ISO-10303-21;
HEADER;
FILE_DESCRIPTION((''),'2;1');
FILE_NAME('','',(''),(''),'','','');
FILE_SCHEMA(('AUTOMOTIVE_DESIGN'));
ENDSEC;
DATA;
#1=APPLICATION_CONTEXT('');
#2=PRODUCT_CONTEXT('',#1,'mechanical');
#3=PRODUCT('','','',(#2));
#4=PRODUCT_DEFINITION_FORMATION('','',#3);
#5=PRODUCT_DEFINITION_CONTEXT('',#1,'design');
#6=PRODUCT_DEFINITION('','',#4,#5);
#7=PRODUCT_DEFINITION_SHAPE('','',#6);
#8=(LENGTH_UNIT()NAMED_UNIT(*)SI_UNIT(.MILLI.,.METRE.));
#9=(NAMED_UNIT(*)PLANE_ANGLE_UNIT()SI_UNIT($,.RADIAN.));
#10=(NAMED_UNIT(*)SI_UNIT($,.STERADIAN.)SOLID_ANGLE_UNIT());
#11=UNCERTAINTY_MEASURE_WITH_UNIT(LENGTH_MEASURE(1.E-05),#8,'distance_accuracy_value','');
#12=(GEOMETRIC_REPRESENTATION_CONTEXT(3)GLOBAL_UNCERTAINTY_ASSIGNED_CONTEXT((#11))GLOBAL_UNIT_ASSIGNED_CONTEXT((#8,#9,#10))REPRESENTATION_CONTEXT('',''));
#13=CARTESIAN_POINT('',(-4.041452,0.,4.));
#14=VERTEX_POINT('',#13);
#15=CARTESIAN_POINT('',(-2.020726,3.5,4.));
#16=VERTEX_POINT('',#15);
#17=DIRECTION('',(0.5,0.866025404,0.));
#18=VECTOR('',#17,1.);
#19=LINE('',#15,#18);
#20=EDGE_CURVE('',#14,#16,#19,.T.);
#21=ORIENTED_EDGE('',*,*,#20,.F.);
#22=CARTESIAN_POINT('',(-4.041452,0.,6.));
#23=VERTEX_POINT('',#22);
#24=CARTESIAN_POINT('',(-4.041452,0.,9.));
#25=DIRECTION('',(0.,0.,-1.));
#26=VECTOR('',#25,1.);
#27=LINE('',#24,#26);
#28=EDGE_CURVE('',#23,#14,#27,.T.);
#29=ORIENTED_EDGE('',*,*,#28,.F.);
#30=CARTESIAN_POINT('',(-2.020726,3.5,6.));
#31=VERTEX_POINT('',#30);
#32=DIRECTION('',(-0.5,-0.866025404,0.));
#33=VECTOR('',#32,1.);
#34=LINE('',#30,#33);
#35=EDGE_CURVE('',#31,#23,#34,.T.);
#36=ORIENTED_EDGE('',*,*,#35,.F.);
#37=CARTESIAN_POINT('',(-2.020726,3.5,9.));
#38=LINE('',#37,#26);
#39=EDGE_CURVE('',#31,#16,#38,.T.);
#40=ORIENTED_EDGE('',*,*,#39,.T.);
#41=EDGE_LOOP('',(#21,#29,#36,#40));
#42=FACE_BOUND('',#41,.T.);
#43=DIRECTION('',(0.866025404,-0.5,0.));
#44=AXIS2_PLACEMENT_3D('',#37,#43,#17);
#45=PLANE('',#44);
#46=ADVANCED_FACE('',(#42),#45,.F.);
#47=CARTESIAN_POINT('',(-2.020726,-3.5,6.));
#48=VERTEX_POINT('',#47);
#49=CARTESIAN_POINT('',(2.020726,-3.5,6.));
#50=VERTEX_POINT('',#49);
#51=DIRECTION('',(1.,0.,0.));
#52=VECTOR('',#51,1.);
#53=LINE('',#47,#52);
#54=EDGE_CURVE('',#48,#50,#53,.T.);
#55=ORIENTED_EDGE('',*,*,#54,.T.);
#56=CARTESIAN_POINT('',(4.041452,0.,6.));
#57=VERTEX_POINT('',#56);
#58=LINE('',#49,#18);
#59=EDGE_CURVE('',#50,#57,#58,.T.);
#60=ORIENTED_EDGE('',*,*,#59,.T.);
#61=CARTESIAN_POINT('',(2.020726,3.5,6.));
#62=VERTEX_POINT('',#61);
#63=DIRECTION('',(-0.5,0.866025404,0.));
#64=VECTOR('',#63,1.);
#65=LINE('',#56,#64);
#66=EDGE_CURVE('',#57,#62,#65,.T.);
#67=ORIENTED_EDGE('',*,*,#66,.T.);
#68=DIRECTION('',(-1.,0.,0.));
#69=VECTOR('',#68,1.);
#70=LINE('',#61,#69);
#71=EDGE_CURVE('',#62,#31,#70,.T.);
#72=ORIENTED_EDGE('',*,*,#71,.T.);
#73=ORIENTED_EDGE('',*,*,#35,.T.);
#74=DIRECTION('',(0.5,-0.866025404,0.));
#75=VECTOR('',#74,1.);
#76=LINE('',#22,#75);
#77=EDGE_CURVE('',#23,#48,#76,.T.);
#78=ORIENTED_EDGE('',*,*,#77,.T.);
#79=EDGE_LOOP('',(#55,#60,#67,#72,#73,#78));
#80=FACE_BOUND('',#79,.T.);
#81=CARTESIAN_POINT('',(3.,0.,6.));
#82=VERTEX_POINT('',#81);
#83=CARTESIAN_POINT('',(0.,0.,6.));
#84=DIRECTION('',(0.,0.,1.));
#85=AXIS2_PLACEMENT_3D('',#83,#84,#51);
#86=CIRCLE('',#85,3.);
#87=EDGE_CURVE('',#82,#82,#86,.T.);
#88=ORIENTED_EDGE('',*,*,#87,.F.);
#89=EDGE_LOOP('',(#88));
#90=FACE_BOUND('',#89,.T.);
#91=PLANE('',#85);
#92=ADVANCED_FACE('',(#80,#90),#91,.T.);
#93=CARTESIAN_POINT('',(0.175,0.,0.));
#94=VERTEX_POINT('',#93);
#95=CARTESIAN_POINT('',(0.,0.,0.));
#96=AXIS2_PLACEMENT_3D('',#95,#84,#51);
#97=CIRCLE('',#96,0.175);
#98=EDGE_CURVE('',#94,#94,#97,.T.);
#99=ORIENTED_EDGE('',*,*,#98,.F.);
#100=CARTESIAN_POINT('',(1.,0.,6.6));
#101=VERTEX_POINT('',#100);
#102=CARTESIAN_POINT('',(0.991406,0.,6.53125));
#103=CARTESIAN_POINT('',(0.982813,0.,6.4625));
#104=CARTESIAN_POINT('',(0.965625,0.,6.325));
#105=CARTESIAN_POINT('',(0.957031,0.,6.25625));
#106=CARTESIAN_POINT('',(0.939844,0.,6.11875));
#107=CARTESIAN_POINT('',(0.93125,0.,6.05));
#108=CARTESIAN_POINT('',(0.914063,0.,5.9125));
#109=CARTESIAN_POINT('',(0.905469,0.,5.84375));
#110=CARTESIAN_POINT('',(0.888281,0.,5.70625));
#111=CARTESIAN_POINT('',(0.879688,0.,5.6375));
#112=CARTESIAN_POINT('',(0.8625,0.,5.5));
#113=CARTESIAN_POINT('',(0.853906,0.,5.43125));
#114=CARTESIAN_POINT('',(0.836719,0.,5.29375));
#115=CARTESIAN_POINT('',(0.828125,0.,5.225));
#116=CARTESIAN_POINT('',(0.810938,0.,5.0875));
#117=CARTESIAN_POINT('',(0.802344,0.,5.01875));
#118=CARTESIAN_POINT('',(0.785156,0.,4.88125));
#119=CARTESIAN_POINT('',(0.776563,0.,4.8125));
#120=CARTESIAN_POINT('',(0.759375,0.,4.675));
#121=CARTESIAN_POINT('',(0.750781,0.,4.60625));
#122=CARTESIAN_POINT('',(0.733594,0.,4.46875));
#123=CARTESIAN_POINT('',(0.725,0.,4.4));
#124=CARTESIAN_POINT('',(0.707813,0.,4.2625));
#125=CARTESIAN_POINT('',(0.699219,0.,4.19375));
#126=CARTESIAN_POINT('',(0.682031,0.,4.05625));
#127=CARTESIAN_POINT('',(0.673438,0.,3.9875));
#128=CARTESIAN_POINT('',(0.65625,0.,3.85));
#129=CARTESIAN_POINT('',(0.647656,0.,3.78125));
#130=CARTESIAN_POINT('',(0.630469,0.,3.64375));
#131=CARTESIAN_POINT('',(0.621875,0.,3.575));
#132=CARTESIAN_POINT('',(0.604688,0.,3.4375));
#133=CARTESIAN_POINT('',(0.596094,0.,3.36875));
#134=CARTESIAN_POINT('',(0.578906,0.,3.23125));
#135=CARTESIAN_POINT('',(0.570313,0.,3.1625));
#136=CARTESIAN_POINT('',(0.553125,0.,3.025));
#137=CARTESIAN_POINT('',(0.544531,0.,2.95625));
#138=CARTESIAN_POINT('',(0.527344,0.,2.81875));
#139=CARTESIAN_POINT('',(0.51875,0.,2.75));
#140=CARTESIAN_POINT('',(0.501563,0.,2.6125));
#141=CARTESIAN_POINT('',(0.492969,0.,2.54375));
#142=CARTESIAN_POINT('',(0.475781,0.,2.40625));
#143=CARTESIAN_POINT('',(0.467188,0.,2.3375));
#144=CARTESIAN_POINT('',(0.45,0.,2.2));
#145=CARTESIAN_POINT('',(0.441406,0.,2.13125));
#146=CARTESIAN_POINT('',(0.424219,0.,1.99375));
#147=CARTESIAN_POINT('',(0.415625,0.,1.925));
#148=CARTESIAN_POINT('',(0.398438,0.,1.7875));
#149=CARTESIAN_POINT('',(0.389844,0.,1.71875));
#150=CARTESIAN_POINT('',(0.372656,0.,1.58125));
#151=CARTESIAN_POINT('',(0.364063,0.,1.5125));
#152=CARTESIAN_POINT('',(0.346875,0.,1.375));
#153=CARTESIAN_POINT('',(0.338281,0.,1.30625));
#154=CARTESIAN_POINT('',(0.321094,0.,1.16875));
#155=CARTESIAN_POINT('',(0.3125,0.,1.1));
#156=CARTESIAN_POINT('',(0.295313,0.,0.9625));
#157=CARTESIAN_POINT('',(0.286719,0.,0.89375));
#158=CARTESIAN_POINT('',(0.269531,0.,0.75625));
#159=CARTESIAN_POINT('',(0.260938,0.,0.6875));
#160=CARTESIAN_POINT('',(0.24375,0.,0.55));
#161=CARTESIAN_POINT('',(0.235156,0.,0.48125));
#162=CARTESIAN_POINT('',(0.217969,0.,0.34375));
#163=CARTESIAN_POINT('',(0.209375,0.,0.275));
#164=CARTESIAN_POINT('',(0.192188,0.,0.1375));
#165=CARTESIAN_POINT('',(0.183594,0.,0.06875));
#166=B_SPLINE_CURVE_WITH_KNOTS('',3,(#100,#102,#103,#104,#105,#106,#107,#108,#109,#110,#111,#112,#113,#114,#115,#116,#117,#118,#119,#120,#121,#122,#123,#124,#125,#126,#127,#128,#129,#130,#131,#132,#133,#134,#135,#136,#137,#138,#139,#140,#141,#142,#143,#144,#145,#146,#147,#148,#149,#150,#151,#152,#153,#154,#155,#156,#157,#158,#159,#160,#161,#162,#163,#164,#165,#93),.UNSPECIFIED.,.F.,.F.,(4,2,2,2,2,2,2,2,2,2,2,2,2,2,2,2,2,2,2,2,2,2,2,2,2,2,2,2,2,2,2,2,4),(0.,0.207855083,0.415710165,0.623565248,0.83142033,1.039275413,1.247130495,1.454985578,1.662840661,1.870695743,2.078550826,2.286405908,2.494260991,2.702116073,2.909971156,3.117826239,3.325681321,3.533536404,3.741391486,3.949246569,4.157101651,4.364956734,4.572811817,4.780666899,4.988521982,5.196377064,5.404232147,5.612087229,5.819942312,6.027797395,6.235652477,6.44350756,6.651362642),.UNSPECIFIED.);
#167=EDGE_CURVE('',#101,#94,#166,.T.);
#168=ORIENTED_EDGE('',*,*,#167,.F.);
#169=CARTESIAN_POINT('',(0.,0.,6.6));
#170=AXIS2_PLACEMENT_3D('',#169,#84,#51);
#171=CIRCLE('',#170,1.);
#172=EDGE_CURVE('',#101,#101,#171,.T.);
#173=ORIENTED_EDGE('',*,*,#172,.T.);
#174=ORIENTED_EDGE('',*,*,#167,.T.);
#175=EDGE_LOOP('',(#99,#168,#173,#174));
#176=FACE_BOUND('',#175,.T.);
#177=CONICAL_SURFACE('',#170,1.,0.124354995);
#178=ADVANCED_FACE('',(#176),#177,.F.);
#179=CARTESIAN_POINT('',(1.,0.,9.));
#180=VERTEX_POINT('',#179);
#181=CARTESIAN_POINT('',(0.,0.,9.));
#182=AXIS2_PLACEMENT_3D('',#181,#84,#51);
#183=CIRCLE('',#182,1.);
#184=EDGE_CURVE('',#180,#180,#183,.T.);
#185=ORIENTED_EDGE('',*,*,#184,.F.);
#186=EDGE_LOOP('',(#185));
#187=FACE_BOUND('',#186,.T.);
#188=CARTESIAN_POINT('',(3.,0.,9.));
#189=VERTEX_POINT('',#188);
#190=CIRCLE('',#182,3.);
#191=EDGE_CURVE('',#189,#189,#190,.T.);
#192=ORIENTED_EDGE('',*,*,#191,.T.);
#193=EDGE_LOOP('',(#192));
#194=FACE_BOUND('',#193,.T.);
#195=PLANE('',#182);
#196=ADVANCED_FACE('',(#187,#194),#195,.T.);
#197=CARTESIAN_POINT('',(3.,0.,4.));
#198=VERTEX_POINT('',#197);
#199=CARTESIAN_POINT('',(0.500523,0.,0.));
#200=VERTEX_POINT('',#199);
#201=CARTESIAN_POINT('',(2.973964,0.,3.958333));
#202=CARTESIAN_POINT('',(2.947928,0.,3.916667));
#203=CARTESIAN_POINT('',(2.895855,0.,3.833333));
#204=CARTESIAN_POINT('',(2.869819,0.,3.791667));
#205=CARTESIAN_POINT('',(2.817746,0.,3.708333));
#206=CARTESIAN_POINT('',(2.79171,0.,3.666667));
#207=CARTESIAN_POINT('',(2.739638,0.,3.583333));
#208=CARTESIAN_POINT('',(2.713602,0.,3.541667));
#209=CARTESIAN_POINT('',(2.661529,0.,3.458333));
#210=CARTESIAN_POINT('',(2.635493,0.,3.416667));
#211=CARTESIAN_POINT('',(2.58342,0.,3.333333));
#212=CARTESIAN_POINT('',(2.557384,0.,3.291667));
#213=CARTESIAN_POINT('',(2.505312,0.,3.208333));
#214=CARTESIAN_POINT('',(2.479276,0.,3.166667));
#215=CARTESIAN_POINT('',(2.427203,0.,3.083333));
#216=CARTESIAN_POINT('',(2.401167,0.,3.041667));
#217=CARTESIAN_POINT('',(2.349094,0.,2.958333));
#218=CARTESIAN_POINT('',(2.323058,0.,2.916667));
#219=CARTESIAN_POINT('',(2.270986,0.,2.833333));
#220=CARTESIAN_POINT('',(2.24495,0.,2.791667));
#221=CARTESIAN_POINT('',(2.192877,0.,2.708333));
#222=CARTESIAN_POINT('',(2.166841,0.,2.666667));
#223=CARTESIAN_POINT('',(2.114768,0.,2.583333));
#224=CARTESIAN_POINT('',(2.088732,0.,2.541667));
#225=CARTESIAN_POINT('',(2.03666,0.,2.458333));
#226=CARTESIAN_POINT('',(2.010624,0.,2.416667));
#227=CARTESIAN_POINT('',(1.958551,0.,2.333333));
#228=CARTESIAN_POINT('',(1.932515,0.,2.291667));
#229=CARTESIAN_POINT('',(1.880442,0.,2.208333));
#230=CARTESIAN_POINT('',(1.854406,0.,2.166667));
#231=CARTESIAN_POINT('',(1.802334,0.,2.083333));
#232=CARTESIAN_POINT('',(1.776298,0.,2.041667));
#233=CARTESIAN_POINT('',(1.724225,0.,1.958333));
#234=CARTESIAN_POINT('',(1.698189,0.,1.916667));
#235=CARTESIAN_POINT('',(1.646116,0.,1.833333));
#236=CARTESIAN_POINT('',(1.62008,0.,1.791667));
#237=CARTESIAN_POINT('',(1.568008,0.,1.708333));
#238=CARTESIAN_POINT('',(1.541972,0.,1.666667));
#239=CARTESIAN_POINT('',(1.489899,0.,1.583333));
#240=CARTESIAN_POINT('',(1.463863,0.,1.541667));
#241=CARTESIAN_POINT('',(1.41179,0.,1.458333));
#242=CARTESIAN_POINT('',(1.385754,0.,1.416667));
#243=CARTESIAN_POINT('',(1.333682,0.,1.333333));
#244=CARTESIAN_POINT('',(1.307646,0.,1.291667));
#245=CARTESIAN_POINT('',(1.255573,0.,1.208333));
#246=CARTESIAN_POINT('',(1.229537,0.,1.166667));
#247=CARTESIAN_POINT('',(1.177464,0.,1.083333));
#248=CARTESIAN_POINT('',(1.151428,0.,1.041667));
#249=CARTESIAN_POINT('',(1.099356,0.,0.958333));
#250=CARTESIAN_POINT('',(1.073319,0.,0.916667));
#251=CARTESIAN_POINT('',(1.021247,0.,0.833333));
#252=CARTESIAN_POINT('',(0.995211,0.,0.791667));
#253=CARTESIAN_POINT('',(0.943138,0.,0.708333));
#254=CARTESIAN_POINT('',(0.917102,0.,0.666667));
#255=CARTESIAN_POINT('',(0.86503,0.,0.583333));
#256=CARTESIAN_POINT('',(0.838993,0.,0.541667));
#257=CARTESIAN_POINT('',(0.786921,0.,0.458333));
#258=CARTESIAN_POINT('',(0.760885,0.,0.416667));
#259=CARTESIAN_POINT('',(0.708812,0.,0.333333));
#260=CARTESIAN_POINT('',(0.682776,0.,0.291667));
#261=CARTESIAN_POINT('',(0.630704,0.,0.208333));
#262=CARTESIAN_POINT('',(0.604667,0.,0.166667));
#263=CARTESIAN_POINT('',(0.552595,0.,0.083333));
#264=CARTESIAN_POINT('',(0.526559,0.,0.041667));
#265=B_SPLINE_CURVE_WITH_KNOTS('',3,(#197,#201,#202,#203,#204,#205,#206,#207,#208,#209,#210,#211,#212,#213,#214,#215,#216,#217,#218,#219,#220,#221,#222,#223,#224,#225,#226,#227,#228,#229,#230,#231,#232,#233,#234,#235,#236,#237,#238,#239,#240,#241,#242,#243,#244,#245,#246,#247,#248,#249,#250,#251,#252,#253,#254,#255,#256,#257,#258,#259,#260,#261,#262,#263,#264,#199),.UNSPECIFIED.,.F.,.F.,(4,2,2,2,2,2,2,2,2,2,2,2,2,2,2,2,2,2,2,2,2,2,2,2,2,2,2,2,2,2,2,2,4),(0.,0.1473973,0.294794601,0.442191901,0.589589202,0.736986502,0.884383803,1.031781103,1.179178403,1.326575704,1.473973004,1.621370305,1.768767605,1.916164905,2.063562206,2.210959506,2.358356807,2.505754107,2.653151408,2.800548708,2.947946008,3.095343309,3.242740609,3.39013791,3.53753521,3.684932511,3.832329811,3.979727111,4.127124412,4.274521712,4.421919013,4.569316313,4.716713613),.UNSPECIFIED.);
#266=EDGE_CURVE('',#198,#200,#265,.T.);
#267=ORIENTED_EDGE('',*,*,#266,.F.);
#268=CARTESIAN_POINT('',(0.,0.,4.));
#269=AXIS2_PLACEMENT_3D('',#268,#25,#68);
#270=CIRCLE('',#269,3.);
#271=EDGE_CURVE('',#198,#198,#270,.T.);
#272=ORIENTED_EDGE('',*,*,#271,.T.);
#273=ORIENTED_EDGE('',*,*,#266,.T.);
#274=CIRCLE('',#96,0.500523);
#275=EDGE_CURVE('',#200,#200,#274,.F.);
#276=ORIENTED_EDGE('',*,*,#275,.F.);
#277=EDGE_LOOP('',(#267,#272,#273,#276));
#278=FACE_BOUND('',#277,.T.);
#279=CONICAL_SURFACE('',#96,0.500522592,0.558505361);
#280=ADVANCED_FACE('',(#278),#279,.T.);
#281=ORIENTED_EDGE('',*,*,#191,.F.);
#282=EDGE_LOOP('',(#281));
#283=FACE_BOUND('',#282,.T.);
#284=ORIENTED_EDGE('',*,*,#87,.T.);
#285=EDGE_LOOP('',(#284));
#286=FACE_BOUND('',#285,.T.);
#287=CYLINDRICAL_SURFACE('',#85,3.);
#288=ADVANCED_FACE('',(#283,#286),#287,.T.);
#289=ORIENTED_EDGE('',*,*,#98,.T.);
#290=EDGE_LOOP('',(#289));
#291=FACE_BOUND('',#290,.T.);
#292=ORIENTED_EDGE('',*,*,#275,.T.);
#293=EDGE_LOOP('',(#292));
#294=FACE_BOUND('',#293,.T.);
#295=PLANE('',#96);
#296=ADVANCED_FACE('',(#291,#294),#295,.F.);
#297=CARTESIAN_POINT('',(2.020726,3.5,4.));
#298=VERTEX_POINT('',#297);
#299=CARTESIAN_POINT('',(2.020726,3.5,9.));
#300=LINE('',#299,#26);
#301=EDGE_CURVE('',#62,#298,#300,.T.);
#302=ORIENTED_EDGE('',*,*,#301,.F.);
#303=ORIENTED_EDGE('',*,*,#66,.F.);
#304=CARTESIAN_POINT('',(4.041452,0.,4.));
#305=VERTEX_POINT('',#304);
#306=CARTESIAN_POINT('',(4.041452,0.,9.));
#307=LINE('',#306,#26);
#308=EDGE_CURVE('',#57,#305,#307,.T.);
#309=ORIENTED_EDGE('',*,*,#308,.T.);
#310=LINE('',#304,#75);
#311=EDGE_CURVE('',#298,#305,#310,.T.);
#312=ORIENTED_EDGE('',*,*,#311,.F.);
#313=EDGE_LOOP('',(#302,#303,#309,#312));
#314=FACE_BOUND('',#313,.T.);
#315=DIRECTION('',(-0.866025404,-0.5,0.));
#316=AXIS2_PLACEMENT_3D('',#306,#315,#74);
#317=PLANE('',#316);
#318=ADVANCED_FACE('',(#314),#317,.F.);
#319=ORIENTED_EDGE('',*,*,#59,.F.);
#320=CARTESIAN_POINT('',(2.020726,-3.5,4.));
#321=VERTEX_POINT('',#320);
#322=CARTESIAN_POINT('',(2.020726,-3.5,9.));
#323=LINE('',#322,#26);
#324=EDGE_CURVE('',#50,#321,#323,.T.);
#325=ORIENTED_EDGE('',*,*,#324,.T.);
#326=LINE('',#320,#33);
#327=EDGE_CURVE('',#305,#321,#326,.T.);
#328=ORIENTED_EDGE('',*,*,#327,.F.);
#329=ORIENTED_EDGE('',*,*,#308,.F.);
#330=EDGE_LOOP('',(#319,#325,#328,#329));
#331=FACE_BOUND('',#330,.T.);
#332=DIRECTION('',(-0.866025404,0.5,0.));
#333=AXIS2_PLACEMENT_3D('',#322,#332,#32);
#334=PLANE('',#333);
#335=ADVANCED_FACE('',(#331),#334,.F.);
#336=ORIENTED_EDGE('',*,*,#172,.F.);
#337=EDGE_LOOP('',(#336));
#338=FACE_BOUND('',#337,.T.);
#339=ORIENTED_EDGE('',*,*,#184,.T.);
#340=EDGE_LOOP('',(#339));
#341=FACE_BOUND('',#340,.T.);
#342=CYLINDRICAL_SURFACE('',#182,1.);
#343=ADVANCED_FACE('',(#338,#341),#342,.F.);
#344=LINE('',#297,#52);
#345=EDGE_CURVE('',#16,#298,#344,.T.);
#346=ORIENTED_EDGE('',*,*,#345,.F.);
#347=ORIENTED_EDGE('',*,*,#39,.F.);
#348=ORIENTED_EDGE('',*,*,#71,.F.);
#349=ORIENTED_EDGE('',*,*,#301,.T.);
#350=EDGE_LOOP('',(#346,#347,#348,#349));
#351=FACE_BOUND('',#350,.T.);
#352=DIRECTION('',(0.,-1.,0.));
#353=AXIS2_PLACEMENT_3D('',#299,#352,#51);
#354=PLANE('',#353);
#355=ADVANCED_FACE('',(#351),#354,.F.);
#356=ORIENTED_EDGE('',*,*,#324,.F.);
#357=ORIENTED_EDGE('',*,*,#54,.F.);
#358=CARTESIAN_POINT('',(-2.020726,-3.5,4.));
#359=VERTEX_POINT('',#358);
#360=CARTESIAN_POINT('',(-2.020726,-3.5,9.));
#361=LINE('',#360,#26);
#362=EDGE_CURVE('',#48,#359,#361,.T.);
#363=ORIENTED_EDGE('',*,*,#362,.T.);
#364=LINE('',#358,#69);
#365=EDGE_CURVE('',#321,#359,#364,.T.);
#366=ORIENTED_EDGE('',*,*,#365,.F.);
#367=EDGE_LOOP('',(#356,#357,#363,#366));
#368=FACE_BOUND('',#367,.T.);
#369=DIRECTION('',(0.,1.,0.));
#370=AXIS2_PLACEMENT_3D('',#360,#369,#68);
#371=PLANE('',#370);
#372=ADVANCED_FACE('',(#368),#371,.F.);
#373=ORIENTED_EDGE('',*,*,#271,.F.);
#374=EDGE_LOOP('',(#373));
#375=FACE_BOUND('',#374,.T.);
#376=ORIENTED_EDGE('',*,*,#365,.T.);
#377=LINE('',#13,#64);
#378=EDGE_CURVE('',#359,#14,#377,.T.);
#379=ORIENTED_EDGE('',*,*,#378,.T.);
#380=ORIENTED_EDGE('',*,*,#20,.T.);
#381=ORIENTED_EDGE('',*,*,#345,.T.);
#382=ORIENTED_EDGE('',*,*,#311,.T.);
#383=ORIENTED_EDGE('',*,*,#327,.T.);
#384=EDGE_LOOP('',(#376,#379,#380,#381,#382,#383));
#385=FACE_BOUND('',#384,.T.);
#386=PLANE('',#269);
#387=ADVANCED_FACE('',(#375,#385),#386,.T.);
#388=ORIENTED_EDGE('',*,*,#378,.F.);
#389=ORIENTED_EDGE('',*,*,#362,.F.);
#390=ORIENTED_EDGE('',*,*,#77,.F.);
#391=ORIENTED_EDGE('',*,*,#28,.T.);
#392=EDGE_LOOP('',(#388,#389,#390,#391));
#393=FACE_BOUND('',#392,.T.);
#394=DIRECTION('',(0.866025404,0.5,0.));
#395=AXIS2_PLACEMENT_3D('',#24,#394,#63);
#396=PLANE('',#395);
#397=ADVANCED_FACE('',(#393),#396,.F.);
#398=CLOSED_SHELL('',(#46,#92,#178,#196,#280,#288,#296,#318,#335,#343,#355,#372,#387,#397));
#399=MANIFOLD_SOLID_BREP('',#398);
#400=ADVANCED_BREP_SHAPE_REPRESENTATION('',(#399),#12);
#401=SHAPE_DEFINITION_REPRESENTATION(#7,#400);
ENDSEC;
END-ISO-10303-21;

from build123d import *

# Parameters (mm, degrees)
BOSS_EXTRU_1_DEPTH      = 9
ESQUISSE2_W             = 15.557161579
ESQUISSE2_H             = 11.468773674
ESQUISSE2_R             = 3
ENL_V_MAT_EXTRU_1_DEPTH = 3
ENL_V_START             = -4
ESQUISSE3_W             = 15.323034965
ESQUISSE3_H             = 11.861185192
ESQUISSE3_R             = 3
ENL_V_MAT_EXTRU_3_DEPTH = 4
CHANFREIN2_SIZE         = 4
CHANFREIN2_SIZE_2       = 2.499477408


with BuildPart() as part:
    # Esquisse1 → Boss.-Extru.1 (new body)
    with BuildSketch(Plane.XY):
        Polygon((4.041451884, 0), (2.020725942, 3.5), (-2.020725942, 3.5), (-4.041451884, 0), (-2.020725942, -3.5), (2.020725942, -3.5), align=None)
    extrude(amount=BOSS_EXTRU_1_DEPTH)

    # Esquisse2 → Enlèv. mat.-Extru.1 (cut)
    with BuildSketch(Plane.XY.offset(9)):
        with Locations((-0.212602531, -0.232116366)):
            Rectangle(ESQUISSE2_W, ESQUISSE2_H)
        Circle(ESQUISSE2_R, mode=Mode.SUBTRACT)
    extrude(amount=-ENL_V_MAT_EXTRU_1_DEPTH, mode=Mode.SUBTRACT)

    # Esquisse3 → Enlèv. mat.-Extru.3 (cut)
    with BuildSketch(Plane(origin=(0, 0, 0), x_dir=(-1, 0, 0), z_dir=(0, 0, -1)).offset(ENL_V_START)):
        with Locations((0.20407301, -0.146192801)):
            Rectangle(ESQUISSE3_W, ESQUISSE3_H)
        with Locations(Location((0, 0, 0), (0, 0, 180))):
            Circle(ESQUISSE3_R, mode=Mode.SUBTRACT)
    extrude(amount=ENL_V_MAT_EXTRU_3_DEPTH, mode=Mode.SUBTRACT)

    # Chanfrein2
    # the kernel refuses this chamfer: 4, 2.499477408 mm, written as the material it takes off along each edge
    with BuildSketch(Plane(origin=(0, 0, 0), x_dir=(1, 0, 0), z_dir=(0, 1, 0))) as chanfrein2_piece_1_section:
        Polygon((3, -CHANFREIN2_SIZE), (3 - CHANFREIN2_SIZE_2, 0), (3, 0), align=None)
    chanfrein2_piece_1 = revolve(axis=Axis((0, 0, 0), (0, 0, -1)), mode=Mode.PRIVATE)
    chanfrein2_piece_1 = split(chanfrein2_piece_1, bisect_by=Plane(origin=(-1.744026904, 0, 4), z_dir=(0, 0, -1)), keep=Keep.TOP, mode=Mode.PRIVATE)
    add(chanfrein2_piece_1, mode=Mode.SUBTRACT)

    # Esquisse4 → Enlèvement de matière-Révolution1 (revolve, cut)
    with BuildSketch(Plane(origin=(0, 0, 0), x_dir=(1, 0, 0), z_dir=(0, 1, 0))):
        Polygon((0, 1.4), (1, -6.6), (1, -9), (0, -9), align=None)
    revolve(axis=Axis((0, 0, 9), (0, 0, -1)), mode=Mode.SUBTRACT)


solid = part.part
